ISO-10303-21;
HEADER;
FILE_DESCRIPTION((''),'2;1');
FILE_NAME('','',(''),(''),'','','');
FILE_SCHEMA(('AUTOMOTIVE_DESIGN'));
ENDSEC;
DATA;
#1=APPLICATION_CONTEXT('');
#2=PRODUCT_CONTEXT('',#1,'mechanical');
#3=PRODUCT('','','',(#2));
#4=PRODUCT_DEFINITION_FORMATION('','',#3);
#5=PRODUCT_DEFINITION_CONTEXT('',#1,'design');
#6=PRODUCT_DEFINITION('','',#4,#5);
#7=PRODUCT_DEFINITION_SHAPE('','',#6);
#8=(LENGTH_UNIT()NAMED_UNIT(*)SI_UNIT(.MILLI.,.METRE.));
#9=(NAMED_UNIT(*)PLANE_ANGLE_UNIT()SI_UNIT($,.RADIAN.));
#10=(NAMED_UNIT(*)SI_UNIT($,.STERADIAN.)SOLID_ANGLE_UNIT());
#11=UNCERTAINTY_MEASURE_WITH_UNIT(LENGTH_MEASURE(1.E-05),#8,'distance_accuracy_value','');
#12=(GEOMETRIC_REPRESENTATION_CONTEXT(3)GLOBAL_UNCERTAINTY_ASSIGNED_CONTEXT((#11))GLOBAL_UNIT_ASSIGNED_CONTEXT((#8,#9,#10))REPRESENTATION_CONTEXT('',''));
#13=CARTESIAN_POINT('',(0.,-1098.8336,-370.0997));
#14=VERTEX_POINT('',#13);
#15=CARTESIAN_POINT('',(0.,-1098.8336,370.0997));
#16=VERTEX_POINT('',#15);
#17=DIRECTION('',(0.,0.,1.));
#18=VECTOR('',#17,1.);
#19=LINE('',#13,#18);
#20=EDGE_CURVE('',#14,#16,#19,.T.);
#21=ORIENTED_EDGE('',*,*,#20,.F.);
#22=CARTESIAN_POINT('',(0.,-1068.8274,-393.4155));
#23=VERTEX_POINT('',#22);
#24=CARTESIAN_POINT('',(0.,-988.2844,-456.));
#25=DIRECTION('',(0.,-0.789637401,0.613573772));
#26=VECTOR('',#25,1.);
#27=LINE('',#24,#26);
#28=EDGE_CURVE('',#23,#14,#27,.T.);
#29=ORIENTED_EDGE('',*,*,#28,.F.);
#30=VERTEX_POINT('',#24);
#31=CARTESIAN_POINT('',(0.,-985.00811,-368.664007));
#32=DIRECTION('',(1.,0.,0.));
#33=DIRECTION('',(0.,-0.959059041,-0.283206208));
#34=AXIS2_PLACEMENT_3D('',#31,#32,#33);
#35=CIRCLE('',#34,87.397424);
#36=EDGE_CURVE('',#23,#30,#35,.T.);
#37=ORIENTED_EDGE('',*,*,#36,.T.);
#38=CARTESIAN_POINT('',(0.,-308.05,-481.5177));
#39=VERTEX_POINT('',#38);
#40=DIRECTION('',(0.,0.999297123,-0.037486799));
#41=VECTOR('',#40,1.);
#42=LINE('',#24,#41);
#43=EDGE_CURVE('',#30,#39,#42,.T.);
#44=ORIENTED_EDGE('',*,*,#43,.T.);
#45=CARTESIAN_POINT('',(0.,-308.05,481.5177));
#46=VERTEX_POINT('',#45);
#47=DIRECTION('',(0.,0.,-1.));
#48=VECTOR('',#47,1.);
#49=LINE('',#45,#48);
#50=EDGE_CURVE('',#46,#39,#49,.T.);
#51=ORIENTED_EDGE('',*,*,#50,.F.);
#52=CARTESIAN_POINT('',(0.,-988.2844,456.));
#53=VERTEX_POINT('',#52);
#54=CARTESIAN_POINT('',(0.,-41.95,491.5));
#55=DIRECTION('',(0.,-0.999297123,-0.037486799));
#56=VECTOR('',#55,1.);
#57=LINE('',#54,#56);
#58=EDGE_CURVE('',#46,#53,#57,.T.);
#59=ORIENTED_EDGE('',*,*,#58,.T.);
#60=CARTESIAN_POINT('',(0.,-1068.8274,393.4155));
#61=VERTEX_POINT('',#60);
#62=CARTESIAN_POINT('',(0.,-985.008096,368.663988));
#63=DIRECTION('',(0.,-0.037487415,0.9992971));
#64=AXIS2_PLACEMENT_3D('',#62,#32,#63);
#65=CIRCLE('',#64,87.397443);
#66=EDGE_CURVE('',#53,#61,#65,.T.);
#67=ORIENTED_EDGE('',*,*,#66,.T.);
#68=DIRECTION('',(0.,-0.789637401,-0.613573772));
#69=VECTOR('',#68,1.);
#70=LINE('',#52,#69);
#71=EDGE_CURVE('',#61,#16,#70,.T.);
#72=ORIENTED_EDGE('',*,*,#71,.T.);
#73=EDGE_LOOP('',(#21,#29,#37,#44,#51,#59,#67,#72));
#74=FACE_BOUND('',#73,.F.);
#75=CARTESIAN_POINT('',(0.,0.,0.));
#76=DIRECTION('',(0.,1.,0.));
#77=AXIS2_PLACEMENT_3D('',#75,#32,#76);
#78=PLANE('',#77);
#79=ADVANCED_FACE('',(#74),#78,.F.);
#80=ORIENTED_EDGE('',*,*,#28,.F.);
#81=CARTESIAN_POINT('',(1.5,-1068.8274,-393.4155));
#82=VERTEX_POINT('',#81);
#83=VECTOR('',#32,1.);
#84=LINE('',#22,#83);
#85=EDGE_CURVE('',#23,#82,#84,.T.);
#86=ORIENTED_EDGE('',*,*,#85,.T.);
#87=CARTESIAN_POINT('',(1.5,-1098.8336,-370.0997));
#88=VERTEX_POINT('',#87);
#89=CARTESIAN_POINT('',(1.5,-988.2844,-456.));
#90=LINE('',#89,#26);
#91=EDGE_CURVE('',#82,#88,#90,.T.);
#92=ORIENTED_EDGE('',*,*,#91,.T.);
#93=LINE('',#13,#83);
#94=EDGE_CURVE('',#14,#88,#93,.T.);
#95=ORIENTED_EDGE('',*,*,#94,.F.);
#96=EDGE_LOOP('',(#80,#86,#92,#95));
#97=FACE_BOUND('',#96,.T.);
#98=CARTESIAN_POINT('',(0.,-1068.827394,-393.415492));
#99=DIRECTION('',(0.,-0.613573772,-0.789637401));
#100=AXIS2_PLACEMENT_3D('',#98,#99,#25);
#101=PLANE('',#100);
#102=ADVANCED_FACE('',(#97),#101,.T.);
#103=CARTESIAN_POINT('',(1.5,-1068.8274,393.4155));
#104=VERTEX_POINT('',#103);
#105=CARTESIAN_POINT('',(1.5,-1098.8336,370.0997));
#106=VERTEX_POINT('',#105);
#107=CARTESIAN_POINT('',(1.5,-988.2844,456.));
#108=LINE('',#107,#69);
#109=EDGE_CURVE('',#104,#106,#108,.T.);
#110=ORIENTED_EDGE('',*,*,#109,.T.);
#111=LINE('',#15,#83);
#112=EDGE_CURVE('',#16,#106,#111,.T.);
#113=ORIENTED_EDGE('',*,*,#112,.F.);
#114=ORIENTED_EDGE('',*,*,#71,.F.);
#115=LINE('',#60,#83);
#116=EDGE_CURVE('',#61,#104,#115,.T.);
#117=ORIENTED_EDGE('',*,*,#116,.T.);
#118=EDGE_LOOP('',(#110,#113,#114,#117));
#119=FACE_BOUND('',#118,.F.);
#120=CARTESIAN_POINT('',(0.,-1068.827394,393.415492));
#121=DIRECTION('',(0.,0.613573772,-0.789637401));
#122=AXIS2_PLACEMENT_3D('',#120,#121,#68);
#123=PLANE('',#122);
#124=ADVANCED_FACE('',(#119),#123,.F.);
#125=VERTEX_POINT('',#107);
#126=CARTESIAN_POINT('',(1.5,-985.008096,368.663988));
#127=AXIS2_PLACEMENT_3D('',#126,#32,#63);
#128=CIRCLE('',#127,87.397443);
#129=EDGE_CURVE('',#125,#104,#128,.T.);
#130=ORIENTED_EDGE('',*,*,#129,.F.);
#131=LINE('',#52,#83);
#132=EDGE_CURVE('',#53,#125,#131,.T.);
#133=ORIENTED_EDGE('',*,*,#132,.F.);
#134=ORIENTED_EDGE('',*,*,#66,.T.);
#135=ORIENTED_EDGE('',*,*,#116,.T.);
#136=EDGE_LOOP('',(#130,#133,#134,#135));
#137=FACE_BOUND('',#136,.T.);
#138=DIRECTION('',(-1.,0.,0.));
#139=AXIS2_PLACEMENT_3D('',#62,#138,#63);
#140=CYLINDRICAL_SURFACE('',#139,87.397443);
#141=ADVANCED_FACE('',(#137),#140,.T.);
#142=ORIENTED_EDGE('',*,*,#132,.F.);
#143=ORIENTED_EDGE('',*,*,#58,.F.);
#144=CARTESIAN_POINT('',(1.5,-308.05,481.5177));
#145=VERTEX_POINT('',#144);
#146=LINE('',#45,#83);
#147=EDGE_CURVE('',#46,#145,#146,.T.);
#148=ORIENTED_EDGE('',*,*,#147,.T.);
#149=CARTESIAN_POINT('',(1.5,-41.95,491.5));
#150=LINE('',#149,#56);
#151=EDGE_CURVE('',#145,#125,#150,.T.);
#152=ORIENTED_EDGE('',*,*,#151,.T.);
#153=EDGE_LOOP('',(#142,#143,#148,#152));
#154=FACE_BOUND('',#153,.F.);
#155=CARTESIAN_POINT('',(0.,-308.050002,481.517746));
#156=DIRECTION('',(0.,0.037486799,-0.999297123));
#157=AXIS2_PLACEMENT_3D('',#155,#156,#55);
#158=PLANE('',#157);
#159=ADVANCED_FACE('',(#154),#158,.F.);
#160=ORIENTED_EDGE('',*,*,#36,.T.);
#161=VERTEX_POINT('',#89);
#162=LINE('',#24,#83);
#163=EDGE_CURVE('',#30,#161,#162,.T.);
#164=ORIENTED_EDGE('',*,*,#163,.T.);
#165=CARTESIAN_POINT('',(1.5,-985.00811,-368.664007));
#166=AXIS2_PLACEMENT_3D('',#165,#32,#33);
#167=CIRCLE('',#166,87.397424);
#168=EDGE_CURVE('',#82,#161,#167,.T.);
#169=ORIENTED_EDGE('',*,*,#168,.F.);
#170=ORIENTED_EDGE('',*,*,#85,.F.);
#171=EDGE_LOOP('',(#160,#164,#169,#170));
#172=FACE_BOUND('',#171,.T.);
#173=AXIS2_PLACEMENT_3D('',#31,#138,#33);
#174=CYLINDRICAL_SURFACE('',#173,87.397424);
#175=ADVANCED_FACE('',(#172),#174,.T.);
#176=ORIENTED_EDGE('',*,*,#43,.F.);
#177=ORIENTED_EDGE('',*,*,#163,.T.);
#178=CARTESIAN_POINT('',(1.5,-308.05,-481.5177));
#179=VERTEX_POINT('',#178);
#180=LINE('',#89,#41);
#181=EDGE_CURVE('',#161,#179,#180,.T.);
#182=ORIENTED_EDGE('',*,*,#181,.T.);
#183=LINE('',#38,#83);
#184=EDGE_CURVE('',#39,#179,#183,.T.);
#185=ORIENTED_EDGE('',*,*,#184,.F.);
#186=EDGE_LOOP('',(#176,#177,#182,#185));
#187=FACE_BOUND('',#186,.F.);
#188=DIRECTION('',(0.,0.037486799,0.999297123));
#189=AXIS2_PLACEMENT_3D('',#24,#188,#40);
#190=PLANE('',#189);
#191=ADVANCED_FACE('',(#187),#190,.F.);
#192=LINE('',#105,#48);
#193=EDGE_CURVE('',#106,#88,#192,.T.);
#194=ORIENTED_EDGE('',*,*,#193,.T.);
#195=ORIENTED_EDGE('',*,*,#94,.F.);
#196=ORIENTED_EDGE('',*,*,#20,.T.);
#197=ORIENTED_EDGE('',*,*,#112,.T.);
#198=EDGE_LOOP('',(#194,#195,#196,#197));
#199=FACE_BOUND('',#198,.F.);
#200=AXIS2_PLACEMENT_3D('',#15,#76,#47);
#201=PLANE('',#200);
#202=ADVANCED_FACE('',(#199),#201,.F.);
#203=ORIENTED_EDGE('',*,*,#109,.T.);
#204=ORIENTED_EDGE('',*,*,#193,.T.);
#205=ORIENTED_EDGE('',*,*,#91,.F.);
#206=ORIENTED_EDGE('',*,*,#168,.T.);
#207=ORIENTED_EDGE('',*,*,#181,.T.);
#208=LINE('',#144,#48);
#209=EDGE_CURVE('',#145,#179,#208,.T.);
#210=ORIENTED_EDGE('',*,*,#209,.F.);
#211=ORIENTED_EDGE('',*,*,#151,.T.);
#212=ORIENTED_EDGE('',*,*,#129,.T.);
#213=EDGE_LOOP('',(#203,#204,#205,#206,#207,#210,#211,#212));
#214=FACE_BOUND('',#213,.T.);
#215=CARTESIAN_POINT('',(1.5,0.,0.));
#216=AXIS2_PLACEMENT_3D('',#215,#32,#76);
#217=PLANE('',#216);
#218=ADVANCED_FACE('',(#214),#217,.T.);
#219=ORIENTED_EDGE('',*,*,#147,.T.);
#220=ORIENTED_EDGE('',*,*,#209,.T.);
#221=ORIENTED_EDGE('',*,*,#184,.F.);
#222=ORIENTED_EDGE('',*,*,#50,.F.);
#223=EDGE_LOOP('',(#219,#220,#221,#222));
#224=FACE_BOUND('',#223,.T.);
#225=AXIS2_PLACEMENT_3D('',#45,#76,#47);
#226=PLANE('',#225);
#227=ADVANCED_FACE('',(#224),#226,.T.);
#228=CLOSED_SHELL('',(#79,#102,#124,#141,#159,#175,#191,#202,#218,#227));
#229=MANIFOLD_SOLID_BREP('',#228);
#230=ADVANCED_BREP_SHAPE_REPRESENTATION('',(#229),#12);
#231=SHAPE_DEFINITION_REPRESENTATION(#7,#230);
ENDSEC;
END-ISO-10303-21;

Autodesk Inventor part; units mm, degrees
ref_plane "YZ Plane" through (0, 0, 0) normal (1, 0, 0) x (0, 1, 0)
ref_plane "XZ Plane" through (0, 0, 0) normal (0, 1, 0) x (-1, 0, 0)
ref_plane "XY Plane" through (0, 0, 0) normal (0, 0, 1) x (1, 0, 0)
sketch "Sketch1" plane through (0, 0, 0) normal (1, 0, 0) x (0, 1, 0)
  line L0 (-41.95, 491.5) -> (41.95, 491.5)
  line L1 (41.95, 491.5) -> (41.95, -491.5)
  line L2 (41.95, -491.5) -> (-41.95, -491.5)
  line L3 (-41.95, -491.5) -> (-41.95, 491.5)
  line L4 (-41.95, 491.5) -> (41.95, -491.5) construction
  line L5 (41.95, 491.5) -> (-41.95, -491.5) construction
  line L6 (-41.95, 491.5) -> (-988.2844, 456)
  line L7 (-988.2844, 456) -> (-988.2844, -456)
  line L8 (-988.2844, -456) -> (-41.95, -491.5)
  line L9 (-308.05, 481.5177) -> (-308.05, -481.5177)
  line L10 (-988.2844, 456) -> (-1098.8336, 370.0997)
  arc A0 (-988.2844, 456) -> (-1068.8274, 393.4155) centre (-985.0081, 368.664) ccw
  line L11 (-988.2844, 0) -> (-1170.4564, 0)
  line L12 (-1098.8336, 370.0997) -> (-1098.8336, 0)
  line L13 (-988.2844, -456) -> (-1098.8336, -370.0997)
  arc A1 (-1068.8274, -393.4155) -> (-988.2844, -456) centre (-985.0081, -368.664) ccw
  line L14 (-1098.8336, -370.0997) -> (-1098.8336, 0)
  point P0 (0, 0)
  point P1 (-41.95, 0)
  dimension "d0" = 983
  dimension "d1" = 83.9
  dimension "d3" = 912
  dimension "d4" = 947
  dimension "d5" = 350
  dimension "d9" = 35.7
  dimension "d10" = 102
  dimension "d11" = 38
extrude "Plate2" add sketch "Sketch1" along normal blind 1.5 contours L9 L8 L7 L6
sheet face with bend "Face3" sketch "Sketch1" thickness 1.5 toward (1, 0, 0) bend radius 1.5 contours L7 L11 L12 L10 | L10 A0 | L13 L14 L11 L7 | A1 L13
bend "Bend1"
equation "\"d7\" = Thickness"
equation "\"d12\" = BendRadius"
equation "\"d13\" = BendReliefWidth"
equation "\"d15\" = MinimumRemnant"
equation "\"d14\" = BendReliefDepth"
equation "\"d16\" = TransitionRadius"
equation "\"BendRadius\" = Thickness"
equation "\"BendReliefWidth\" = Thickness"
equation "\"BendReliefDepth\" = 0.5 * Thickness"
equation "\"CornerReliefSize\" = 4 * Thickness"
equation "\"MinimumRemnant\" = 2 * Thickness"
equation "\"TransitionRadius\" = BendRadius"
equation "\"JacobiRadiusSize\" = BendRadius"
equation "\"GapSize\" = Thickness"
equation "\"Thickness\" = 1.5"
properties part number "CHAPA_2" material "Steel, Mild, Welded"
